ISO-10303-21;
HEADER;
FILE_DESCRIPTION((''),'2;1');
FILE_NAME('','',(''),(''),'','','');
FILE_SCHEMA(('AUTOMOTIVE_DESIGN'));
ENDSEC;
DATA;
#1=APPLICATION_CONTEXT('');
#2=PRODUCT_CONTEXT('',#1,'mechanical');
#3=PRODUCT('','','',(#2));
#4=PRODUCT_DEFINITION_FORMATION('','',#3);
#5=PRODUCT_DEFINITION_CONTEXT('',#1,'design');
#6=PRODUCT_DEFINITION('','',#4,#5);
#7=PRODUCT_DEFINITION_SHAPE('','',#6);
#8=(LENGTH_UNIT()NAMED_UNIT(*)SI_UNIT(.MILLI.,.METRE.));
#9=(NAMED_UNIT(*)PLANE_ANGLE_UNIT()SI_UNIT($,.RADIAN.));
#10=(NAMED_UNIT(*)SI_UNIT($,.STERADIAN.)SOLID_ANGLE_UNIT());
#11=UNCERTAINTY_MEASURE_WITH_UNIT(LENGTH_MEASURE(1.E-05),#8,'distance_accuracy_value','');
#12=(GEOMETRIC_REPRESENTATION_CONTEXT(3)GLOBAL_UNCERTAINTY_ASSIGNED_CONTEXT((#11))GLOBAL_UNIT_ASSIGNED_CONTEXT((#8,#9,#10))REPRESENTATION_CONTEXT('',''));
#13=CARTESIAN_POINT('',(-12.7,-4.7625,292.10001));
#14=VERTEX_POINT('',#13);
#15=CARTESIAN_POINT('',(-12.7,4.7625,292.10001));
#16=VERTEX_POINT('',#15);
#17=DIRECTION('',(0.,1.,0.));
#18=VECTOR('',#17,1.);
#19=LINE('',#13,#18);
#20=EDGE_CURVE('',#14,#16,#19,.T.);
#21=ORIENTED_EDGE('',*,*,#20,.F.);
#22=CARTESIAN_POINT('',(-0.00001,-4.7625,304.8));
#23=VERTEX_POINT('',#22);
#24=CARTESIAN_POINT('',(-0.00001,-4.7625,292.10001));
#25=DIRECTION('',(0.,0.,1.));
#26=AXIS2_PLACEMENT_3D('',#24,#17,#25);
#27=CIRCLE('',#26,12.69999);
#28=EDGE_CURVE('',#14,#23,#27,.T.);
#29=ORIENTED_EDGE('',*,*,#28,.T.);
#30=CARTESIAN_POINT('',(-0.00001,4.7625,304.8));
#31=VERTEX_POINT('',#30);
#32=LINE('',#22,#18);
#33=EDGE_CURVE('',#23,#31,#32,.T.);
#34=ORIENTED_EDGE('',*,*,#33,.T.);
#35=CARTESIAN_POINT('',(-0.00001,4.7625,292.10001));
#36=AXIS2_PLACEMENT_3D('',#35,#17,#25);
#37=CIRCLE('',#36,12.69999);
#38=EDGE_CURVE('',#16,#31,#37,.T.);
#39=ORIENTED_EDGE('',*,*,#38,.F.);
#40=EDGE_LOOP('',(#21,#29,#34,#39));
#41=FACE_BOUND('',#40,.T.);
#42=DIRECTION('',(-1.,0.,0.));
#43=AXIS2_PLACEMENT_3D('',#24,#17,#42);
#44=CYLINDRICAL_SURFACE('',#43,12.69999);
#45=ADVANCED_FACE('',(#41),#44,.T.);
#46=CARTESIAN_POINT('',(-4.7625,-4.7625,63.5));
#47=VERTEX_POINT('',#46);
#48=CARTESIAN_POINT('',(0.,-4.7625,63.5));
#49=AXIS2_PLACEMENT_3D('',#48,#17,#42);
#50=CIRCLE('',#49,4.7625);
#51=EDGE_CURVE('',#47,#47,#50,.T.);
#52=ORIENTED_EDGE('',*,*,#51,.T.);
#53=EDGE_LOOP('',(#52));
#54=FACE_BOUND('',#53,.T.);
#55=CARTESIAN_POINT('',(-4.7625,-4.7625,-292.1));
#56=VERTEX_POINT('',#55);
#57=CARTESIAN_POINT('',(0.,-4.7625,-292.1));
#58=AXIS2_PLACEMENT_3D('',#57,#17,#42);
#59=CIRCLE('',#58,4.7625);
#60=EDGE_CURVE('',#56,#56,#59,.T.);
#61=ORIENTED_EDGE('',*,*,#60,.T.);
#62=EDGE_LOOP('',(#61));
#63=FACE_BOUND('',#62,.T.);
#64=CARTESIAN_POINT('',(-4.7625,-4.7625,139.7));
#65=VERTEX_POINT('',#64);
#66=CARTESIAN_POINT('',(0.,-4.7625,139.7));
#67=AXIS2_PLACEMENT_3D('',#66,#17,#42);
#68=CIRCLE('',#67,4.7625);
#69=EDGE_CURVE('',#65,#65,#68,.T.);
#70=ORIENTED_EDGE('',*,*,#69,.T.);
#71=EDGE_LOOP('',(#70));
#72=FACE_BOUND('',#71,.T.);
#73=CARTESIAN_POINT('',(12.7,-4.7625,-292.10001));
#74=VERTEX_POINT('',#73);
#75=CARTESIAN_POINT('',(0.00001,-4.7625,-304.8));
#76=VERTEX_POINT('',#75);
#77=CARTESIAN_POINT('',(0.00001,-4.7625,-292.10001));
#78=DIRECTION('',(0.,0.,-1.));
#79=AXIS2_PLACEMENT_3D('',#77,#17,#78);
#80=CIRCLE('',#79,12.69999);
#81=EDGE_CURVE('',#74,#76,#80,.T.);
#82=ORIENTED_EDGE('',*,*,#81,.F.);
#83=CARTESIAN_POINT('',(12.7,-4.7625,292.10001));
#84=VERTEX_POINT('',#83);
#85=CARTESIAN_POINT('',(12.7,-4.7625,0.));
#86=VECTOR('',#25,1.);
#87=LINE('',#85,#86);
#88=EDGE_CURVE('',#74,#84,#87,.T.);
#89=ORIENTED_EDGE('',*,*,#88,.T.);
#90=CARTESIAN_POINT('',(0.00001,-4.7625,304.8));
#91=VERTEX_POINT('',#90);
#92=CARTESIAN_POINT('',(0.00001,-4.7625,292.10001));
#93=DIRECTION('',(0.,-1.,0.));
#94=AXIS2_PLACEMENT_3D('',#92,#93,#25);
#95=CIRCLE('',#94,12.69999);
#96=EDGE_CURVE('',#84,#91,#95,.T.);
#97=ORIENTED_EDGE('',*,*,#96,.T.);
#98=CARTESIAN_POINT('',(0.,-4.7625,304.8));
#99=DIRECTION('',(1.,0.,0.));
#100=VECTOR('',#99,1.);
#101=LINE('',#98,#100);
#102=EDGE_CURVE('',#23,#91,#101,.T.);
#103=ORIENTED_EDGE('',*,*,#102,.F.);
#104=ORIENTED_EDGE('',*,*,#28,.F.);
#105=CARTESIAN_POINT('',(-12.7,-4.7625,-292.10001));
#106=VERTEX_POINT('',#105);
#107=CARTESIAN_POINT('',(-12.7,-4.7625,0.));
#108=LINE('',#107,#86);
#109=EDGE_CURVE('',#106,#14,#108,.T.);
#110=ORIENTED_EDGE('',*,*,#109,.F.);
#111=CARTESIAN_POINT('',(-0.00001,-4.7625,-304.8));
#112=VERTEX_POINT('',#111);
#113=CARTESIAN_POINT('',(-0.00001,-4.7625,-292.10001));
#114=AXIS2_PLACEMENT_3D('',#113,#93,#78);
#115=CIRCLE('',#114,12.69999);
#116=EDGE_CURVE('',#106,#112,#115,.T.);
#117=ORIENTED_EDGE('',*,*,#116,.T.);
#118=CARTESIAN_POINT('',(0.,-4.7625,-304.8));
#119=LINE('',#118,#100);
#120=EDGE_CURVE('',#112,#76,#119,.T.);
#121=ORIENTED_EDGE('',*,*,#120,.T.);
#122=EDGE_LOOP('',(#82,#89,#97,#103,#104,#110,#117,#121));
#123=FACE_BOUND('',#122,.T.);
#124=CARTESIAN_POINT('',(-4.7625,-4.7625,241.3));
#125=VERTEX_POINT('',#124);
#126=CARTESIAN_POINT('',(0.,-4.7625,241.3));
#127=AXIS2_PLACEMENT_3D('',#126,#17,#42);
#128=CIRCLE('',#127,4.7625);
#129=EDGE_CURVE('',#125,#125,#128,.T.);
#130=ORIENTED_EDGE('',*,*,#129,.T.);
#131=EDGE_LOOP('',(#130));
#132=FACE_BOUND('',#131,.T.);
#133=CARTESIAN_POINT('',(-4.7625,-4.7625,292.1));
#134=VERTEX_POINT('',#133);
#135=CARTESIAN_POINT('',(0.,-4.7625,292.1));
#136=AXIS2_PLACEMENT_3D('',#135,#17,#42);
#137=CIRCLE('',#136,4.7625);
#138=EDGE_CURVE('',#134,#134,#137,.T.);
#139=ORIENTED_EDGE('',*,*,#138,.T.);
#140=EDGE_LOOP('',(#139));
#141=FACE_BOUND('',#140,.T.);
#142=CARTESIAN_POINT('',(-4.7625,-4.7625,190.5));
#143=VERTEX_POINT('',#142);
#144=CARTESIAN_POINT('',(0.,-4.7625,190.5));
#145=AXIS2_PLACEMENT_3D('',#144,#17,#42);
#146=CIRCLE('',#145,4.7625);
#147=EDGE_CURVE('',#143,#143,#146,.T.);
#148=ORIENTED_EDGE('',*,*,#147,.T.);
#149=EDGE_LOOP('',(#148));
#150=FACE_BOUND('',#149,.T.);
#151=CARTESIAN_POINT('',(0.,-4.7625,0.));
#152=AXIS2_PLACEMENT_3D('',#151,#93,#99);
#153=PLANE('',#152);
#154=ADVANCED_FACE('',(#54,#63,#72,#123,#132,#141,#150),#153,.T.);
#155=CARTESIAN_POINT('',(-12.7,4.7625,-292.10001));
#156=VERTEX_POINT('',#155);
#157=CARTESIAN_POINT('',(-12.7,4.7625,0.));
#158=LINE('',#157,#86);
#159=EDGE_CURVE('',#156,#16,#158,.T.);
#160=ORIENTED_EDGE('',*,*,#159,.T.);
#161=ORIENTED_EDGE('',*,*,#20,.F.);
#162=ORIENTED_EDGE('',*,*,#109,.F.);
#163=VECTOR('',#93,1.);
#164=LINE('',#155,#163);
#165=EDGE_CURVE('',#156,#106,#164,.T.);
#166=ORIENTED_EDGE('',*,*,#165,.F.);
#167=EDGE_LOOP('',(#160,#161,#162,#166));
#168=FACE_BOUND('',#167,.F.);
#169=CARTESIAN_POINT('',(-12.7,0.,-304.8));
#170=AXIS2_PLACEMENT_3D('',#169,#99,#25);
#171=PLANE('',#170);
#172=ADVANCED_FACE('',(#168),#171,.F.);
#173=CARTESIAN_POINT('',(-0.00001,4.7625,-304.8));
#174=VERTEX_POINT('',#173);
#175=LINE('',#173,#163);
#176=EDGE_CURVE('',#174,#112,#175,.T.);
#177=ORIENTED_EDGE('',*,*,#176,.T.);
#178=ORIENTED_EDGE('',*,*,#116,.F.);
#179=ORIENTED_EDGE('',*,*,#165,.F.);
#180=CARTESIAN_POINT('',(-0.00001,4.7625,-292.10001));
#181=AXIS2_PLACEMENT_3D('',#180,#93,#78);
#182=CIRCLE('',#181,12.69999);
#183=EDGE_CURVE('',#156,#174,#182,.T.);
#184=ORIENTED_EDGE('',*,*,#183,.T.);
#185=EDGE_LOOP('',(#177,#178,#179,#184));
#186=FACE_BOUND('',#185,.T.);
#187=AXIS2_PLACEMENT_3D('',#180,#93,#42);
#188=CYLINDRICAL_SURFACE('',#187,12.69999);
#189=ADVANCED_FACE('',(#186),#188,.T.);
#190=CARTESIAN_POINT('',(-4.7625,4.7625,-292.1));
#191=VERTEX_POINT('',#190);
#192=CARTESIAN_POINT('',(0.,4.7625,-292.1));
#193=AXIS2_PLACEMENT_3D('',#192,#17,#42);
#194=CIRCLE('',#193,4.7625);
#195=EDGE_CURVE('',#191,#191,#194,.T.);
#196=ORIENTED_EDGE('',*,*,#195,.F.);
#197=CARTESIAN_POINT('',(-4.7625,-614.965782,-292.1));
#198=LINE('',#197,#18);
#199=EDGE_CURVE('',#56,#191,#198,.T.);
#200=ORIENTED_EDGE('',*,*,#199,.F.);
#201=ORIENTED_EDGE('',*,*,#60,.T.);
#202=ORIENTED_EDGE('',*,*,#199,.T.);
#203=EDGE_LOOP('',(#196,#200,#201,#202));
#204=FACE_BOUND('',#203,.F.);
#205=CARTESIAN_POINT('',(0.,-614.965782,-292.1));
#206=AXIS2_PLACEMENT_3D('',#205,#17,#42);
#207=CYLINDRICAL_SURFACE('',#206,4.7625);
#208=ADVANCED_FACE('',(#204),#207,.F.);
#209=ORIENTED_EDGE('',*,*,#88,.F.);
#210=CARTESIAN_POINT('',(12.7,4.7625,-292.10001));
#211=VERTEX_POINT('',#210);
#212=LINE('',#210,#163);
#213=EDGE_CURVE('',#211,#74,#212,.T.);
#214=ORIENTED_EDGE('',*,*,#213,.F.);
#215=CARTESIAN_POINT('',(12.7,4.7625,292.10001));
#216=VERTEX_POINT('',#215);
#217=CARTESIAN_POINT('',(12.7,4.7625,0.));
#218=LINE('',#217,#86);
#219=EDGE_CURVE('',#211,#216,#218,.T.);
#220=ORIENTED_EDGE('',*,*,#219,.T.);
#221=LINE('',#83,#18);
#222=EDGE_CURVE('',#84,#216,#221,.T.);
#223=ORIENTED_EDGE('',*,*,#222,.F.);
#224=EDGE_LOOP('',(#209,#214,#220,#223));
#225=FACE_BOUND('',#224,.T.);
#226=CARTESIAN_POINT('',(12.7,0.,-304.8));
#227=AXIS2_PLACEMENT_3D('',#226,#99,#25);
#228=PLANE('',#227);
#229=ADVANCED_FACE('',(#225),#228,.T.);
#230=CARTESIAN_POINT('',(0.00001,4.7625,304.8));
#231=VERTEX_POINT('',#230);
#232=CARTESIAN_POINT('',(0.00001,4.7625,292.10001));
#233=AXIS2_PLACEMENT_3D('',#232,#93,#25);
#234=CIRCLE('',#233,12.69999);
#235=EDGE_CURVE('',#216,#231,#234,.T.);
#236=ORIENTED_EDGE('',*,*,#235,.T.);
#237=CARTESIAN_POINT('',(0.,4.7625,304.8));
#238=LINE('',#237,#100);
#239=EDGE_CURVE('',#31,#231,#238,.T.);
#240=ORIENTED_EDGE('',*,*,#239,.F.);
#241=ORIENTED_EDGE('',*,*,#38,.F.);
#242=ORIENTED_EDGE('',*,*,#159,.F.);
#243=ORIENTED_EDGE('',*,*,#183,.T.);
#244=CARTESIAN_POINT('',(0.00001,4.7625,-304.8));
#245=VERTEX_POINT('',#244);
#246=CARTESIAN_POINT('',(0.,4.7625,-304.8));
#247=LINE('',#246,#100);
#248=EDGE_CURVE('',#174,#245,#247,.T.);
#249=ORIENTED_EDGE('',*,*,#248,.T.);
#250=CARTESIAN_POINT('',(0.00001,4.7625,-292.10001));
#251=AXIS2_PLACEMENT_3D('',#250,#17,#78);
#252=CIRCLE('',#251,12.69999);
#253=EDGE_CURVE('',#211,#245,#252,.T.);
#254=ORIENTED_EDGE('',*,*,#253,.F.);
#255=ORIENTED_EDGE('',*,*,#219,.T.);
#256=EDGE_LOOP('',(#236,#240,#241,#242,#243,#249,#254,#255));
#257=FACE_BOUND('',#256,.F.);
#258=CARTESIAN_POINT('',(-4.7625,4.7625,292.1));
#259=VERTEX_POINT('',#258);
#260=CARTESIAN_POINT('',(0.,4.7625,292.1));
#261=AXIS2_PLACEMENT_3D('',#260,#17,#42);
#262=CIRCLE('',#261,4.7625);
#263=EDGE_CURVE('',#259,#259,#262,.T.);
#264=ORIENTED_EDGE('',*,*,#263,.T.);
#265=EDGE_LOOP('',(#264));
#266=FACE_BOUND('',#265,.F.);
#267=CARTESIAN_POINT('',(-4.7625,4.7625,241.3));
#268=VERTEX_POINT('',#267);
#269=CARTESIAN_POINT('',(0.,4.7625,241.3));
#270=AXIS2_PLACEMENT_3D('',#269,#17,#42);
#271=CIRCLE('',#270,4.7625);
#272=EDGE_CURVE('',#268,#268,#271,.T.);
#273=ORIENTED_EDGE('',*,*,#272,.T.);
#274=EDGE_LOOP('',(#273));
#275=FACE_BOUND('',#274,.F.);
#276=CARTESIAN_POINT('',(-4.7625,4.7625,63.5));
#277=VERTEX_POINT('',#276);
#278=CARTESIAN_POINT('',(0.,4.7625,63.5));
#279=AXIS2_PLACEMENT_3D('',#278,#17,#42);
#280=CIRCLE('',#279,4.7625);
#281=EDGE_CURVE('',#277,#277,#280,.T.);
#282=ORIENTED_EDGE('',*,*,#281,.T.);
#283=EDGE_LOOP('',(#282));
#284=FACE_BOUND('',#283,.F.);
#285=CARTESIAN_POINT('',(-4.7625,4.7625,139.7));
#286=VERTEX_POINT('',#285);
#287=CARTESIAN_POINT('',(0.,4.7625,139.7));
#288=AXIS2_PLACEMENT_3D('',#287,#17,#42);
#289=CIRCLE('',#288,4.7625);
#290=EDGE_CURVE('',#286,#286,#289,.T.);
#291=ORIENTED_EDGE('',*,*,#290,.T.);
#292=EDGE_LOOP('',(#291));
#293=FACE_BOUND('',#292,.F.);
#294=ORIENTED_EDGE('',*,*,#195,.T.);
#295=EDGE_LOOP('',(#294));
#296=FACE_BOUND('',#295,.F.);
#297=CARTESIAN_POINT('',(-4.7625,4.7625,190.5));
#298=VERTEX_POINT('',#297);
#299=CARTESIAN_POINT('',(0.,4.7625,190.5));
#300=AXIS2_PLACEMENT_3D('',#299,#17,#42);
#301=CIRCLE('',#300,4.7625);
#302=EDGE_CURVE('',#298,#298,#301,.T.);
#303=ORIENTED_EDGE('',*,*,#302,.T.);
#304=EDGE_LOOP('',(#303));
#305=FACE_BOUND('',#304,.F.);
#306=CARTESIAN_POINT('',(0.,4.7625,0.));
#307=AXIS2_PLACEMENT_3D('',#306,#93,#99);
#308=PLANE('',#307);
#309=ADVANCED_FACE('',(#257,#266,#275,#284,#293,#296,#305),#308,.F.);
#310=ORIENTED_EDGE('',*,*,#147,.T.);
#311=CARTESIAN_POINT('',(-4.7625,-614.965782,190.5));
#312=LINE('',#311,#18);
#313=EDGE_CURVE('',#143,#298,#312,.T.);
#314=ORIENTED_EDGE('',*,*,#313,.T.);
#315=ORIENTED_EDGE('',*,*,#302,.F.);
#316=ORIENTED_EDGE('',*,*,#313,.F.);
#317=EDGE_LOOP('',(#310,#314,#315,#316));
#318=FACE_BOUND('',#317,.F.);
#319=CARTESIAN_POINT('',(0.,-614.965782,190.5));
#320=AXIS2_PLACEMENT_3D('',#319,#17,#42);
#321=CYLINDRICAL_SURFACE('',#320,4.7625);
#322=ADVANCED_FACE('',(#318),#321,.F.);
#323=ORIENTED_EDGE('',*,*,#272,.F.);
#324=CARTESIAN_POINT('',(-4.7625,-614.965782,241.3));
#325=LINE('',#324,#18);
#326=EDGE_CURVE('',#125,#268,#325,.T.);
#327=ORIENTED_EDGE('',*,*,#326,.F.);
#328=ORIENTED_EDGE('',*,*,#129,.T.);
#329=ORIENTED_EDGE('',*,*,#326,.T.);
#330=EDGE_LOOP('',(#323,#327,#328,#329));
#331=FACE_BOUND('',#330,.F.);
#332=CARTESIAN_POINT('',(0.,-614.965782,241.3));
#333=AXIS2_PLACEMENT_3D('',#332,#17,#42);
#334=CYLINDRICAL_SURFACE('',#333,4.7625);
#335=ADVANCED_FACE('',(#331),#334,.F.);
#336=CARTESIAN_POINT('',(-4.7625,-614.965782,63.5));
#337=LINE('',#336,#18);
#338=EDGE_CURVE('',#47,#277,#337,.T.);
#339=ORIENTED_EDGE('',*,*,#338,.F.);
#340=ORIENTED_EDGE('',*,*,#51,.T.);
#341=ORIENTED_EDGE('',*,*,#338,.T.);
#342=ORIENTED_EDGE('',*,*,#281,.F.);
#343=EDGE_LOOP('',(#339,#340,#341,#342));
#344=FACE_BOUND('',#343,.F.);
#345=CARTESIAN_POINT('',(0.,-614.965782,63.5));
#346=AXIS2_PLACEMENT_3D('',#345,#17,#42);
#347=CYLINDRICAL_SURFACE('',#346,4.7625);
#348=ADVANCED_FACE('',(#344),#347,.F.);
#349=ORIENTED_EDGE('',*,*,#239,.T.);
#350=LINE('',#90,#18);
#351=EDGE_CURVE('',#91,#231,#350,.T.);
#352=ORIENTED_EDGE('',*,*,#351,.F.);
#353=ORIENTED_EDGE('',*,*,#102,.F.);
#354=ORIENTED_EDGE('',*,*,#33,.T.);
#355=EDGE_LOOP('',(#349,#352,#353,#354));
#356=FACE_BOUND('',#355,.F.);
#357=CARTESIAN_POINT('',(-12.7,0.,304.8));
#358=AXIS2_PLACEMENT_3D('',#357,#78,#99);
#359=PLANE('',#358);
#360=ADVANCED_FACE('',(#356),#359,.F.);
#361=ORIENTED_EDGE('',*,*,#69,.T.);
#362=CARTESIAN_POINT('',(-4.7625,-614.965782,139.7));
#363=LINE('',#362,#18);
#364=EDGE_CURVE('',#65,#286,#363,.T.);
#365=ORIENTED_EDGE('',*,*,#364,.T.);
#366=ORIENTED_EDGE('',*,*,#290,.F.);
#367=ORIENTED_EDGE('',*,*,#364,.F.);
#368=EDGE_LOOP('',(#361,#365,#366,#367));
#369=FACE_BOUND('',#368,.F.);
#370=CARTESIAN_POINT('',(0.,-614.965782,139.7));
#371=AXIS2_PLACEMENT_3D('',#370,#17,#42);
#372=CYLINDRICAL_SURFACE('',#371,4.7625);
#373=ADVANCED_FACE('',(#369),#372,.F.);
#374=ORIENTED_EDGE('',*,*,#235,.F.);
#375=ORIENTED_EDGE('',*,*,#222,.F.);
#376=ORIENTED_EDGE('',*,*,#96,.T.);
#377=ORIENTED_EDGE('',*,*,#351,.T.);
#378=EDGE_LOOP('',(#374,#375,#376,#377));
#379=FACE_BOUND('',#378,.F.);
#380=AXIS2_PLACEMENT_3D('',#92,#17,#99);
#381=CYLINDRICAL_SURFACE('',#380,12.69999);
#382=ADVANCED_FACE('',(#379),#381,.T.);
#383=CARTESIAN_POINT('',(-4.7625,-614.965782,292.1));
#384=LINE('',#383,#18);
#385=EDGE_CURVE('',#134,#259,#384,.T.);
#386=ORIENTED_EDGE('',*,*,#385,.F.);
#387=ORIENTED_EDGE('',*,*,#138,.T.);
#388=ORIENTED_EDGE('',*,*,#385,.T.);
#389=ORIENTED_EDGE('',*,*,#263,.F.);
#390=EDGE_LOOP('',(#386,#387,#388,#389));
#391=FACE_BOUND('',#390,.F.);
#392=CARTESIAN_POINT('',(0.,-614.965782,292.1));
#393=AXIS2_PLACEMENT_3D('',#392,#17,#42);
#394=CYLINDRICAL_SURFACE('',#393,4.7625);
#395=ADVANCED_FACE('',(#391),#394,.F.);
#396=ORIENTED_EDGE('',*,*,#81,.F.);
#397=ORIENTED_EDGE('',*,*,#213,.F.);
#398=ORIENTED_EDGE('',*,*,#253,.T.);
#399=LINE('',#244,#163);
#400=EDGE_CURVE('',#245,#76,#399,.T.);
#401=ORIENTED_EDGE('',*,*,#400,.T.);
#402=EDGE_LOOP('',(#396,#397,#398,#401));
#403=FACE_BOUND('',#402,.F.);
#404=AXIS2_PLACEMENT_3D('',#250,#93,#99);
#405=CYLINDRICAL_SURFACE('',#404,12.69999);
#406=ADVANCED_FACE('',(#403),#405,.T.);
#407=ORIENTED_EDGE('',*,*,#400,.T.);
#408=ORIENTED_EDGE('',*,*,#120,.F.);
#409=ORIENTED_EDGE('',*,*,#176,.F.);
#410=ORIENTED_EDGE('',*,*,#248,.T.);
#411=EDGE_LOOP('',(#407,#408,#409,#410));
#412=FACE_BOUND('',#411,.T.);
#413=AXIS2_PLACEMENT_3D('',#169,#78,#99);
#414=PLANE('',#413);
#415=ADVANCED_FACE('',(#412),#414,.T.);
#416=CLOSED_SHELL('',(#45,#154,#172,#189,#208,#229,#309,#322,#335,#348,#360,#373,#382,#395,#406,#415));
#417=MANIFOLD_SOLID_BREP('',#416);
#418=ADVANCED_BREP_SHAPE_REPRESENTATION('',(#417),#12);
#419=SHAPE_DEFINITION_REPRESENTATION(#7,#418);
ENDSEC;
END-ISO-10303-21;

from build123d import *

# Parameters (mm, degrees)
F0_W     = 25.4
F0_H     = 609.6
F1_DEPTH = 4.7625
F2_R     = 12.69999
F4_D     = 9.525


# Not quite as in the source:
# - a fillet or chamfer is up to 0.001 mm smaller than in the source, because OpenCascade refuses the exact size


with BuildPart() as f1:
    # F0 (on Front) → F1 (new body, symmetric)
    with BuildSketch(Plane.XZ):
        Rectangle(F0_W, F0_H)
    extrude(amount=F1_DEPTH, both=True)

    # F2 (radius 12.7 in the source; OpenCascade refuses exactly that, so slightly less here)
    f2_edges = [f1.edges().sort_by_distance(p)[0] for p in [
        (12.7, 0, 304.8),
        (-12.7, 0, 304.8),
        (-12.7, 0, -304.8),
        (12.7, 0, -304.8),
    ]]
    fillet(f2_edges, radius=F2_R)

    # F4 (through all)
    with Locations(Plane.XZ.offset(4.7625)):
        with Locations((0, -292.1), (0, 292.1), (0, 63.5), (0, 241.3), (0, 190.5), (0, 139.7)):
            Hole(F4_D / 2)


solid = f1.part
